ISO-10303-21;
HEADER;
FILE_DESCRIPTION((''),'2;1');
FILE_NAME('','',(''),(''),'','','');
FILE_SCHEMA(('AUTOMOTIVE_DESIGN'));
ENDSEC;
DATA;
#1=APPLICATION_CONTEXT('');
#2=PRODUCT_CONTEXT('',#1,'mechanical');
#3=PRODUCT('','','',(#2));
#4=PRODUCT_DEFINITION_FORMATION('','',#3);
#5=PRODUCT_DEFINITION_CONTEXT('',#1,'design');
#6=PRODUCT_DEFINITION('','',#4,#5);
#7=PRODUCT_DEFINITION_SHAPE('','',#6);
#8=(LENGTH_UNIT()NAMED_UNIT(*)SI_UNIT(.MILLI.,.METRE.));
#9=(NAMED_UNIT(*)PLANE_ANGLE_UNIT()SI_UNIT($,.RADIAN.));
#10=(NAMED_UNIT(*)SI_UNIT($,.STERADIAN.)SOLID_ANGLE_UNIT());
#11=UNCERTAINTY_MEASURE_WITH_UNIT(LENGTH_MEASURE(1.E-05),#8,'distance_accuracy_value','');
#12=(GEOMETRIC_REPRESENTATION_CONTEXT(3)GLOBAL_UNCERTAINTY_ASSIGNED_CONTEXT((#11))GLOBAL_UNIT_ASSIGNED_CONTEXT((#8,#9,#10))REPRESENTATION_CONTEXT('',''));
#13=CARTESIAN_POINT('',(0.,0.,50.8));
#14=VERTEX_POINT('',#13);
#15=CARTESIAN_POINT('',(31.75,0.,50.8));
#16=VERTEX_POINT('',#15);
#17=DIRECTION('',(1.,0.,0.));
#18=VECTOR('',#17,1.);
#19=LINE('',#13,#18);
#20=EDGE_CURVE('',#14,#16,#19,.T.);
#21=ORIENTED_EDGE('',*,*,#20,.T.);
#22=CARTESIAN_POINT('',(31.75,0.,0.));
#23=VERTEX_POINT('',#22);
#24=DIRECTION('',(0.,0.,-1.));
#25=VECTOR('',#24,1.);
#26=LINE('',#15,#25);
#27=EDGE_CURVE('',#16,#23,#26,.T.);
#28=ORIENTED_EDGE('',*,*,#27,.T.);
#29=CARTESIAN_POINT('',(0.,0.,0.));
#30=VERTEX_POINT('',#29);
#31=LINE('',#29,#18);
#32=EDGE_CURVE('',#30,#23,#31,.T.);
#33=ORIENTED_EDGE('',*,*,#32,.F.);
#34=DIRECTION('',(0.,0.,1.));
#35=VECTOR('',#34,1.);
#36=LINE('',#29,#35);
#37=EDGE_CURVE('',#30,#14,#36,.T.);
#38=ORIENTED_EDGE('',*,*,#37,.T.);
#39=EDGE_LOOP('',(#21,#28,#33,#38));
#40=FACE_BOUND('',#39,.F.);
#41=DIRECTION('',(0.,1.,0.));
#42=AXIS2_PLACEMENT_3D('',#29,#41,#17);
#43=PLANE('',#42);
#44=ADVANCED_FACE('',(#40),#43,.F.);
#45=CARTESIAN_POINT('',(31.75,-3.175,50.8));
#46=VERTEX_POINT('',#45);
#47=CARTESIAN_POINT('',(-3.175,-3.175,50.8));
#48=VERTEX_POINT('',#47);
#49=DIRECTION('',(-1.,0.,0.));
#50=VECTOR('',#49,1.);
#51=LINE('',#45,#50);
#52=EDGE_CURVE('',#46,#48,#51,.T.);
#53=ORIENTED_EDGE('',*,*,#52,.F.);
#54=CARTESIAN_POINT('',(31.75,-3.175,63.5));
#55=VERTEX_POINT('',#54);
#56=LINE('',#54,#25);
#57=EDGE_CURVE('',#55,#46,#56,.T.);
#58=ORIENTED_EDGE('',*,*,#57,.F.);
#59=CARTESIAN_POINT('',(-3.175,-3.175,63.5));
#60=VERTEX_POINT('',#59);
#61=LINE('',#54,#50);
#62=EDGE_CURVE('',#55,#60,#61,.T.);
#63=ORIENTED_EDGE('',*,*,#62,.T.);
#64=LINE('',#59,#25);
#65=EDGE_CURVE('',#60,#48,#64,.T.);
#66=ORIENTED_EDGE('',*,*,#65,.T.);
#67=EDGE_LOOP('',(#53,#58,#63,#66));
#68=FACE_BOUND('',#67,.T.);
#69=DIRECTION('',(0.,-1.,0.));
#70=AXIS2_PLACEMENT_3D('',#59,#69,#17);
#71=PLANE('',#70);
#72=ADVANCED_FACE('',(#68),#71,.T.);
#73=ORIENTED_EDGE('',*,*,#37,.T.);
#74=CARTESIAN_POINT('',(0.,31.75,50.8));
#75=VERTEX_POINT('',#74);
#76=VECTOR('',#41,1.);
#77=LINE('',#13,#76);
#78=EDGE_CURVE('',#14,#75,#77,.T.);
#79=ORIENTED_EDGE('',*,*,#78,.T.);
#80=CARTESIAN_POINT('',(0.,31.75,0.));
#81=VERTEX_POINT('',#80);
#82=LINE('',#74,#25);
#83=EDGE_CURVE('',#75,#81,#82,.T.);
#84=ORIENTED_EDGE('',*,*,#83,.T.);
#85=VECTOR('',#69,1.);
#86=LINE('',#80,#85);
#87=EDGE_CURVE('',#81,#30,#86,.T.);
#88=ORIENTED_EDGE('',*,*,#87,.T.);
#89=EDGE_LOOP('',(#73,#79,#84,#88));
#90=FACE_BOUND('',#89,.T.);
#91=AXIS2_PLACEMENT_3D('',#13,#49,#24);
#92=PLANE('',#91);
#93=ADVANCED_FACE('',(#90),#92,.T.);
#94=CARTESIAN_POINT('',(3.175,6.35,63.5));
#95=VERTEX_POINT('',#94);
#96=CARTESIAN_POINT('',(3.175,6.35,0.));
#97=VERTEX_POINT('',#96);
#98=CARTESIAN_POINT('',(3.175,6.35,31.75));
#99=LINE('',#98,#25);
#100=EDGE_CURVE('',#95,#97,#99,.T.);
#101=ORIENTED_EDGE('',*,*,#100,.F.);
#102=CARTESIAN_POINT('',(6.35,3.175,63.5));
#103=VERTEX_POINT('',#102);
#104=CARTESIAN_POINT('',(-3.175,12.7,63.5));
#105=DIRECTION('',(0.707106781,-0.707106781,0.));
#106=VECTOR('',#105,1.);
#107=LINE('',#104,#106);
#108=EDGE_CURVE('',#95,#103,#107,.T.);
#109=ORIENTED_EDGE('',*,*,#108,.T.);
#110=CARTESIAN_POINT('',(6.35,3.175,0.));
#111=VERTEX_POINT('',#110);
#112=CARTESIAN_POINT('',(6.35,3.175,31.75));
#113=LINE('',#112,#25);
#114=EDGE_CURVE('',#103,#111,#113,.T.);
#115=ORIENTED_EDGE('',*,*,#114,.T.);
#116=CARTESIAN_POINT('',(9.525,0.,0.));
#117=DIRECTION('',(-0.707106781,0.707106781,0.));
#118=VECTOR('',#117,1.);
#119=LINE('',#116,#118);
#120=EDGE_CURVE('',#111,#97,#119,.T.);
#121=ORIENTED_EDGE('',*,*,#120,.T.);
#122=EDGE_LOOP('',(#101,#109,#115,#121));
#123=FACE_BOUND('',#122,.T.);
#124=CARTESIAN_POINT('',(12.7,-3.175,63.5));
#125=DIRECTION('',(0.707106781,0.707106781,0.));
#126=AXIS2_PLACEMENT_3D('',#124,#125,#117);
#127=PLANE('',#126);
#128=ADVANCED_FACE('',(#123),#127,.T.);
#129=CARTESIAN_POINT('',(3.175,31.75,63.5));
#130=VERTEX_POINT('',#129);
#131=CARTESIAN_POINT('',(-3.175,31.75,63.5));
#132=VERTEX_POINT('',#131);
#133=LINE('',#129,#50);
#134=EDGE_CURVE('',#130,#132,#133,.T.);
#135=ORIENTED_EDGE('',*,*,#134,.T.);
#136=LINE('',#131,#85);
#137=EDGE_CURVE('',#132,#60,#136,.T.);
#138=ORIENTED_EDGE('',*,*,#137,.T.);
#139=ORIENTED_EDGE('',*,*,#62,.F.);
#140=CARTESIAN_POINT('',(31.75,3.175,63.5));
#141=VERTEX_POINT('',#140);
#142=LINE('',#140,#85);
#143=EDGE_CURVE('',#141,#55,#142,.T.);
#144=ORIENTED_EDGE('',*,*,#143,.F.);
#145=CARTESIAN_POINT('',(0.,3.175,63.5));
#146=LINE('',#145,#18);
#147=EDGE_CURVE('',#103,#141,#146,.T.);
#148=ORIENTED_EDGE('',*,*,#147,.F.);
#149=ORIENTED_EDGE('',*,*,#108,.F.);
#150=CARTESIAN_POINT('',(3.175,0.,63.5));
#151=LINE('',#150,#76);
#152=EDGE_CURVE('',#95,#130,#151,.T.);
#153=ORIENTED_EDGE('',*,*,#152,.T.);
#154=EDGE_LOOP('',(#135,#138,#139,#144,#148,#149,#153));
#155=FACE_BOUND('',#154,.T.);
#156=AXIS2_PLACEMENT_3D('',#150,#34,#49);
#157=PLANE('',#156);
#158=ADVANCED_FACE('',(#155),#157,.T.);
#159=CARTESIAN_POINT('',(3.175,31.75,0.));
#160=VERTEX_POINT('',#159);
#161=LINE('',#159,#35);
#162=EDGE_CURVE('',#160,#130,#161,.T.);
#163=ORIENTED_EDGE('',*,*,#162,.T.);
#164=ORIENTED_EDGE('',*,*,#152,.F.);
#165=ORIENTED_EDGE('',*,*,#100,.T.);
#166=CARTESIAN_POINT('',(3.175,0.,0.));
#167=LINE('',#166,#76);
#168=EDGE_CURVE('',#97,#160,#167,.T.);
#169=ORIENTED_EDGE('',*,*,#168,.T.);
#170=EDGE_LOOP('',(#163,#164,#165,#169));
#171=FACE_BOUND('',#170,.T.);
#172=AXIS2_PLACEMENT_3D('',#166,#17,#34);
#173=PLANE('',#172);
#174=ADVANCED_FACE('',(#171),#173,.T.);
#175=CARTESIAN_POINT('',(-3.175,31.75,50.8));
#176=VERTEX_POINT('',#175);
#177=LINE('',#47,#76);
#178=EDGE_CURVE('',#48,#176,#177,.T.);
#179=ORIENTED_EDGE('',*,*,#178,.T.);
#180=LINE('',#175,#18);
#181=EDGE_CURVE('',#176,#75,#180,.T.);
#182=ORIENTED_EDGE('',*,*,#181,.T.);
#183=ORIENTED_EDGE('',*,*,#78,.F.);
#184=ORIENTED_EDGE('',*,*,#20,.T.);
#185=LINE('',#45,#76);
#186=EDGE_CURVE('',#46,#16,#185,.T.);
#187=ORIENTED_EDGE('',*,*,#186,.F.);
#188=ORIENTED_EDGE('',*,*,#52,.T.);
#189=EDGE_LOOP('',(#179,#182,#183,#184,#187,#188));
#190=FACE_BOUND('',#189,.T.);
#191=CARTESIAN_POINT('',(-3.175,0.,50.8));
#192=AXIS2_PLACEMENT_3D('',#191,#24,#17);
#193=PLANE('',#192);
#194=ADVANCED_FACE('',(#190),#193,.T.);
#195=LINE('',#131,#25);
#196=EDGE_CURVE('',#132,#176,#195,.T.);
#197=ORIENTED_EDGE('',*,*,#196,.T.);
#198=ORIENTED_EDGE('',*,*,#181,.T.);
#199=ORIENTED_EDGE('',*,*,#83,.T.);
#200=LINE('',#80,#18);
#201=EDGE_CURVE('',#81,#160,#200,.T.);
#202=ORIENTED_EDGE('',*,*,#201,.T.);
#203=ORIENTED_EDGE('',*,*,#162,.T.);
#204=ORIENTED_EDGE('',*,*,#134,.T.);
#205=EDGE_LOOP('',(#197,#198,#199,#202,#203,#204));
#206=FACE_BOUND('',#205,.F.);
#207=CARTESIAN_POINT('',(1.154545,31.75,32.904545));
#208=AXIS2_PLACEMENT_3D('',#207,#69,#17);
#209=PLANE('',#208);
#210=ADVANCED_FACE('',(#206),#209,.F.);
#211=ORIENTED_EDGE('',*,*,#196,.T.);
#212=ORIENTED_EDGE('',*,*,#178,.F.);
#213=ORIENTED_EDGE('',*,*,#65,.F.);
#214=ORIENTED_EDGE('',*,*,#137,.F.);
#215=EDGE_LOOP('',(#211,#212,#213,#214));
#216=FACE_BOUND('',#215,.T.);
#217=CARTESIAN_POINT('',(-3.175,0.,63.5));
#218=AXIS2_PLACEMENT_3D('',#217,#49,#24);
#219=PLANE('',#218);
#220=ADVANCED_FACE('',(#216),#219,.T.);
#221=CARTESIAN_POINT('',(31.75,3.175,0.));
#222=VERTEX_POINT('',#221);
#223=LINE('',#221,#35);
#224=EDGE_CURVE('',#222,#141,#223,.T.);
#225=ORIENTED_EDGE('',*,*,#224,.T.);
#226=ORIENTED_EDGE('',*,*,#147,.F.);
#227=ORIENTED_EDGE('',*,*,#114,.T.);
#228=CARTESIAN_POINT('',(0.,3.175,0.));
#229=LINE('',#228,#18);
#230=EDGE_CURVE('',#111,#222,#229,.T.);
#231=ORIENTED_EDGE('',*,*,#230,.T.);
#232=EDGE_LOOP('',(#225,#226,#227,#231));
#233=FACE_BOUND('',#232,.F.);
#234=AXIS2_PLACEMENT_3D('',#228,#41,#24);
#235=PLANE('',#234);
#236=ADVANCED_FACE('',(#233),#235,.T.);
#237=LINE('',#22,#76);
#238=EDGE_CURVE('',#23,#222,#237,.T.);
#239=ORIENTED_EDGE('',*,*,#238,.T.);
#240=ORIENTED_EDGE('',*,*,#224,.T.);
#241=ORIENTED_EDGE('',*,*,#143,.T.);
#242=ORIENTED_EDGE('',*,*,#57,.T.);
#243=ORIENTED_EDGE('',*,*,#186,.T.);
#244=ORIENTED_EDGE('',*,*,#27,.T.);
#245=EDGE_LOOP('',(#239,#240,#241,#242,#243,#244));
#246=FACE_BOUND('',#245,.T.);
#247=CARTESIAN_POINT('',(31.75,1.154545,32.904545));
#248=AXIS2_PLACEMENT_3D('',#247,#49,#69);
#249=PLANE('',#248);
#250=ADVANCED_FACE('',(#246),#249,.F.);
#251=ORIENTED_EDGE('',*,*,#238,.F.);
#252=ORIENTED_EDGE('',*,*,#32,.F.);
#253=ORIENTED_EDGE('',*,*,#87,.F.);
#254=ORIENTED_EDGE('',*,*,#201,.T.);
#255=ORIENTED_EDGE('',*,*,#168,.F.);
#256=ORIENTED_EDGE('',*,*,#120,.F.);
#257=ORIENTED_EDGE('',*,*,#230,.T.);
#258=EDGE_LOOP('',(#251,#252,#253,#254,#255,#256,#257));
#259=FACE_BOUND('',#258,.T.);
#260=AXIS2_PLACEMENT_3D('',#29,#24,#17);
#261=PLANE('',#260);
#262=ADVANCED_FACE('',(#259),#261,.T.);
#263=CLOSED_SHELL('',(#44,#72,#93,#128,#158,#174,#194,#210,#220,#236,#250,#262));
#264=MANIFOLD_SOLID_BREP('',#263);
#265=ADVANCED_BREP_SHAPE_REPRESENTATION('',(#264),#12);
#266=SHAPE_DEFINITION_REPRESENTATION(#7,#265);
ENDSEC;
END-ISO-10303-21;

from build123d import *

# Parameters (mm, degrees)
F1_DEPTH = 63.5
F3_DEPTH = 12.7
F5_DEPTH = 31.75


# Not quite as in the source:
# - a pattern or mirror of a feature is missing from the dataset's text; its kind, count and spacing are read off the source's solid


with BuildPart() as f1:
    # F0 (on Top) → F1 (new body)
    with BuildSketch(Plane.XY):
        Polygon((0, 9.525), (0, 0), (9.525, 0), align=None)
    extrude(amount=F1_DEPTH)

    # F2 (on face) → F3 (join)
    with BuildSketch(Plane.XY.offset(63.5)):
        Polygon((12.7, -3.175), (4.7625, 4.7625), (-3.175, 12.7), (-3.175, -3.175), align=None)
    extrude(amount=-F3_DEPTH)

    # F4 (on face) → F5 (join)
    with BuildSketch(Plane.XZ):
        Polygon((0, 50.8), (0, 0), (3.175, 0), (3.175, 63.5), (-3.175, 63.5), (-3.175, 50.8), align=None)
    f5 = extrude(amount=-F5_DEPTH)

    # F5_copies: F5 across plane
    add(f5.mirror(Plane(origin=(0, 0, 0), x_dir=(-0.7071067812, -0.7071067812, 0), z_dir=(0.7071067812, -0.7071067812, 0))))


solid = f1.part
